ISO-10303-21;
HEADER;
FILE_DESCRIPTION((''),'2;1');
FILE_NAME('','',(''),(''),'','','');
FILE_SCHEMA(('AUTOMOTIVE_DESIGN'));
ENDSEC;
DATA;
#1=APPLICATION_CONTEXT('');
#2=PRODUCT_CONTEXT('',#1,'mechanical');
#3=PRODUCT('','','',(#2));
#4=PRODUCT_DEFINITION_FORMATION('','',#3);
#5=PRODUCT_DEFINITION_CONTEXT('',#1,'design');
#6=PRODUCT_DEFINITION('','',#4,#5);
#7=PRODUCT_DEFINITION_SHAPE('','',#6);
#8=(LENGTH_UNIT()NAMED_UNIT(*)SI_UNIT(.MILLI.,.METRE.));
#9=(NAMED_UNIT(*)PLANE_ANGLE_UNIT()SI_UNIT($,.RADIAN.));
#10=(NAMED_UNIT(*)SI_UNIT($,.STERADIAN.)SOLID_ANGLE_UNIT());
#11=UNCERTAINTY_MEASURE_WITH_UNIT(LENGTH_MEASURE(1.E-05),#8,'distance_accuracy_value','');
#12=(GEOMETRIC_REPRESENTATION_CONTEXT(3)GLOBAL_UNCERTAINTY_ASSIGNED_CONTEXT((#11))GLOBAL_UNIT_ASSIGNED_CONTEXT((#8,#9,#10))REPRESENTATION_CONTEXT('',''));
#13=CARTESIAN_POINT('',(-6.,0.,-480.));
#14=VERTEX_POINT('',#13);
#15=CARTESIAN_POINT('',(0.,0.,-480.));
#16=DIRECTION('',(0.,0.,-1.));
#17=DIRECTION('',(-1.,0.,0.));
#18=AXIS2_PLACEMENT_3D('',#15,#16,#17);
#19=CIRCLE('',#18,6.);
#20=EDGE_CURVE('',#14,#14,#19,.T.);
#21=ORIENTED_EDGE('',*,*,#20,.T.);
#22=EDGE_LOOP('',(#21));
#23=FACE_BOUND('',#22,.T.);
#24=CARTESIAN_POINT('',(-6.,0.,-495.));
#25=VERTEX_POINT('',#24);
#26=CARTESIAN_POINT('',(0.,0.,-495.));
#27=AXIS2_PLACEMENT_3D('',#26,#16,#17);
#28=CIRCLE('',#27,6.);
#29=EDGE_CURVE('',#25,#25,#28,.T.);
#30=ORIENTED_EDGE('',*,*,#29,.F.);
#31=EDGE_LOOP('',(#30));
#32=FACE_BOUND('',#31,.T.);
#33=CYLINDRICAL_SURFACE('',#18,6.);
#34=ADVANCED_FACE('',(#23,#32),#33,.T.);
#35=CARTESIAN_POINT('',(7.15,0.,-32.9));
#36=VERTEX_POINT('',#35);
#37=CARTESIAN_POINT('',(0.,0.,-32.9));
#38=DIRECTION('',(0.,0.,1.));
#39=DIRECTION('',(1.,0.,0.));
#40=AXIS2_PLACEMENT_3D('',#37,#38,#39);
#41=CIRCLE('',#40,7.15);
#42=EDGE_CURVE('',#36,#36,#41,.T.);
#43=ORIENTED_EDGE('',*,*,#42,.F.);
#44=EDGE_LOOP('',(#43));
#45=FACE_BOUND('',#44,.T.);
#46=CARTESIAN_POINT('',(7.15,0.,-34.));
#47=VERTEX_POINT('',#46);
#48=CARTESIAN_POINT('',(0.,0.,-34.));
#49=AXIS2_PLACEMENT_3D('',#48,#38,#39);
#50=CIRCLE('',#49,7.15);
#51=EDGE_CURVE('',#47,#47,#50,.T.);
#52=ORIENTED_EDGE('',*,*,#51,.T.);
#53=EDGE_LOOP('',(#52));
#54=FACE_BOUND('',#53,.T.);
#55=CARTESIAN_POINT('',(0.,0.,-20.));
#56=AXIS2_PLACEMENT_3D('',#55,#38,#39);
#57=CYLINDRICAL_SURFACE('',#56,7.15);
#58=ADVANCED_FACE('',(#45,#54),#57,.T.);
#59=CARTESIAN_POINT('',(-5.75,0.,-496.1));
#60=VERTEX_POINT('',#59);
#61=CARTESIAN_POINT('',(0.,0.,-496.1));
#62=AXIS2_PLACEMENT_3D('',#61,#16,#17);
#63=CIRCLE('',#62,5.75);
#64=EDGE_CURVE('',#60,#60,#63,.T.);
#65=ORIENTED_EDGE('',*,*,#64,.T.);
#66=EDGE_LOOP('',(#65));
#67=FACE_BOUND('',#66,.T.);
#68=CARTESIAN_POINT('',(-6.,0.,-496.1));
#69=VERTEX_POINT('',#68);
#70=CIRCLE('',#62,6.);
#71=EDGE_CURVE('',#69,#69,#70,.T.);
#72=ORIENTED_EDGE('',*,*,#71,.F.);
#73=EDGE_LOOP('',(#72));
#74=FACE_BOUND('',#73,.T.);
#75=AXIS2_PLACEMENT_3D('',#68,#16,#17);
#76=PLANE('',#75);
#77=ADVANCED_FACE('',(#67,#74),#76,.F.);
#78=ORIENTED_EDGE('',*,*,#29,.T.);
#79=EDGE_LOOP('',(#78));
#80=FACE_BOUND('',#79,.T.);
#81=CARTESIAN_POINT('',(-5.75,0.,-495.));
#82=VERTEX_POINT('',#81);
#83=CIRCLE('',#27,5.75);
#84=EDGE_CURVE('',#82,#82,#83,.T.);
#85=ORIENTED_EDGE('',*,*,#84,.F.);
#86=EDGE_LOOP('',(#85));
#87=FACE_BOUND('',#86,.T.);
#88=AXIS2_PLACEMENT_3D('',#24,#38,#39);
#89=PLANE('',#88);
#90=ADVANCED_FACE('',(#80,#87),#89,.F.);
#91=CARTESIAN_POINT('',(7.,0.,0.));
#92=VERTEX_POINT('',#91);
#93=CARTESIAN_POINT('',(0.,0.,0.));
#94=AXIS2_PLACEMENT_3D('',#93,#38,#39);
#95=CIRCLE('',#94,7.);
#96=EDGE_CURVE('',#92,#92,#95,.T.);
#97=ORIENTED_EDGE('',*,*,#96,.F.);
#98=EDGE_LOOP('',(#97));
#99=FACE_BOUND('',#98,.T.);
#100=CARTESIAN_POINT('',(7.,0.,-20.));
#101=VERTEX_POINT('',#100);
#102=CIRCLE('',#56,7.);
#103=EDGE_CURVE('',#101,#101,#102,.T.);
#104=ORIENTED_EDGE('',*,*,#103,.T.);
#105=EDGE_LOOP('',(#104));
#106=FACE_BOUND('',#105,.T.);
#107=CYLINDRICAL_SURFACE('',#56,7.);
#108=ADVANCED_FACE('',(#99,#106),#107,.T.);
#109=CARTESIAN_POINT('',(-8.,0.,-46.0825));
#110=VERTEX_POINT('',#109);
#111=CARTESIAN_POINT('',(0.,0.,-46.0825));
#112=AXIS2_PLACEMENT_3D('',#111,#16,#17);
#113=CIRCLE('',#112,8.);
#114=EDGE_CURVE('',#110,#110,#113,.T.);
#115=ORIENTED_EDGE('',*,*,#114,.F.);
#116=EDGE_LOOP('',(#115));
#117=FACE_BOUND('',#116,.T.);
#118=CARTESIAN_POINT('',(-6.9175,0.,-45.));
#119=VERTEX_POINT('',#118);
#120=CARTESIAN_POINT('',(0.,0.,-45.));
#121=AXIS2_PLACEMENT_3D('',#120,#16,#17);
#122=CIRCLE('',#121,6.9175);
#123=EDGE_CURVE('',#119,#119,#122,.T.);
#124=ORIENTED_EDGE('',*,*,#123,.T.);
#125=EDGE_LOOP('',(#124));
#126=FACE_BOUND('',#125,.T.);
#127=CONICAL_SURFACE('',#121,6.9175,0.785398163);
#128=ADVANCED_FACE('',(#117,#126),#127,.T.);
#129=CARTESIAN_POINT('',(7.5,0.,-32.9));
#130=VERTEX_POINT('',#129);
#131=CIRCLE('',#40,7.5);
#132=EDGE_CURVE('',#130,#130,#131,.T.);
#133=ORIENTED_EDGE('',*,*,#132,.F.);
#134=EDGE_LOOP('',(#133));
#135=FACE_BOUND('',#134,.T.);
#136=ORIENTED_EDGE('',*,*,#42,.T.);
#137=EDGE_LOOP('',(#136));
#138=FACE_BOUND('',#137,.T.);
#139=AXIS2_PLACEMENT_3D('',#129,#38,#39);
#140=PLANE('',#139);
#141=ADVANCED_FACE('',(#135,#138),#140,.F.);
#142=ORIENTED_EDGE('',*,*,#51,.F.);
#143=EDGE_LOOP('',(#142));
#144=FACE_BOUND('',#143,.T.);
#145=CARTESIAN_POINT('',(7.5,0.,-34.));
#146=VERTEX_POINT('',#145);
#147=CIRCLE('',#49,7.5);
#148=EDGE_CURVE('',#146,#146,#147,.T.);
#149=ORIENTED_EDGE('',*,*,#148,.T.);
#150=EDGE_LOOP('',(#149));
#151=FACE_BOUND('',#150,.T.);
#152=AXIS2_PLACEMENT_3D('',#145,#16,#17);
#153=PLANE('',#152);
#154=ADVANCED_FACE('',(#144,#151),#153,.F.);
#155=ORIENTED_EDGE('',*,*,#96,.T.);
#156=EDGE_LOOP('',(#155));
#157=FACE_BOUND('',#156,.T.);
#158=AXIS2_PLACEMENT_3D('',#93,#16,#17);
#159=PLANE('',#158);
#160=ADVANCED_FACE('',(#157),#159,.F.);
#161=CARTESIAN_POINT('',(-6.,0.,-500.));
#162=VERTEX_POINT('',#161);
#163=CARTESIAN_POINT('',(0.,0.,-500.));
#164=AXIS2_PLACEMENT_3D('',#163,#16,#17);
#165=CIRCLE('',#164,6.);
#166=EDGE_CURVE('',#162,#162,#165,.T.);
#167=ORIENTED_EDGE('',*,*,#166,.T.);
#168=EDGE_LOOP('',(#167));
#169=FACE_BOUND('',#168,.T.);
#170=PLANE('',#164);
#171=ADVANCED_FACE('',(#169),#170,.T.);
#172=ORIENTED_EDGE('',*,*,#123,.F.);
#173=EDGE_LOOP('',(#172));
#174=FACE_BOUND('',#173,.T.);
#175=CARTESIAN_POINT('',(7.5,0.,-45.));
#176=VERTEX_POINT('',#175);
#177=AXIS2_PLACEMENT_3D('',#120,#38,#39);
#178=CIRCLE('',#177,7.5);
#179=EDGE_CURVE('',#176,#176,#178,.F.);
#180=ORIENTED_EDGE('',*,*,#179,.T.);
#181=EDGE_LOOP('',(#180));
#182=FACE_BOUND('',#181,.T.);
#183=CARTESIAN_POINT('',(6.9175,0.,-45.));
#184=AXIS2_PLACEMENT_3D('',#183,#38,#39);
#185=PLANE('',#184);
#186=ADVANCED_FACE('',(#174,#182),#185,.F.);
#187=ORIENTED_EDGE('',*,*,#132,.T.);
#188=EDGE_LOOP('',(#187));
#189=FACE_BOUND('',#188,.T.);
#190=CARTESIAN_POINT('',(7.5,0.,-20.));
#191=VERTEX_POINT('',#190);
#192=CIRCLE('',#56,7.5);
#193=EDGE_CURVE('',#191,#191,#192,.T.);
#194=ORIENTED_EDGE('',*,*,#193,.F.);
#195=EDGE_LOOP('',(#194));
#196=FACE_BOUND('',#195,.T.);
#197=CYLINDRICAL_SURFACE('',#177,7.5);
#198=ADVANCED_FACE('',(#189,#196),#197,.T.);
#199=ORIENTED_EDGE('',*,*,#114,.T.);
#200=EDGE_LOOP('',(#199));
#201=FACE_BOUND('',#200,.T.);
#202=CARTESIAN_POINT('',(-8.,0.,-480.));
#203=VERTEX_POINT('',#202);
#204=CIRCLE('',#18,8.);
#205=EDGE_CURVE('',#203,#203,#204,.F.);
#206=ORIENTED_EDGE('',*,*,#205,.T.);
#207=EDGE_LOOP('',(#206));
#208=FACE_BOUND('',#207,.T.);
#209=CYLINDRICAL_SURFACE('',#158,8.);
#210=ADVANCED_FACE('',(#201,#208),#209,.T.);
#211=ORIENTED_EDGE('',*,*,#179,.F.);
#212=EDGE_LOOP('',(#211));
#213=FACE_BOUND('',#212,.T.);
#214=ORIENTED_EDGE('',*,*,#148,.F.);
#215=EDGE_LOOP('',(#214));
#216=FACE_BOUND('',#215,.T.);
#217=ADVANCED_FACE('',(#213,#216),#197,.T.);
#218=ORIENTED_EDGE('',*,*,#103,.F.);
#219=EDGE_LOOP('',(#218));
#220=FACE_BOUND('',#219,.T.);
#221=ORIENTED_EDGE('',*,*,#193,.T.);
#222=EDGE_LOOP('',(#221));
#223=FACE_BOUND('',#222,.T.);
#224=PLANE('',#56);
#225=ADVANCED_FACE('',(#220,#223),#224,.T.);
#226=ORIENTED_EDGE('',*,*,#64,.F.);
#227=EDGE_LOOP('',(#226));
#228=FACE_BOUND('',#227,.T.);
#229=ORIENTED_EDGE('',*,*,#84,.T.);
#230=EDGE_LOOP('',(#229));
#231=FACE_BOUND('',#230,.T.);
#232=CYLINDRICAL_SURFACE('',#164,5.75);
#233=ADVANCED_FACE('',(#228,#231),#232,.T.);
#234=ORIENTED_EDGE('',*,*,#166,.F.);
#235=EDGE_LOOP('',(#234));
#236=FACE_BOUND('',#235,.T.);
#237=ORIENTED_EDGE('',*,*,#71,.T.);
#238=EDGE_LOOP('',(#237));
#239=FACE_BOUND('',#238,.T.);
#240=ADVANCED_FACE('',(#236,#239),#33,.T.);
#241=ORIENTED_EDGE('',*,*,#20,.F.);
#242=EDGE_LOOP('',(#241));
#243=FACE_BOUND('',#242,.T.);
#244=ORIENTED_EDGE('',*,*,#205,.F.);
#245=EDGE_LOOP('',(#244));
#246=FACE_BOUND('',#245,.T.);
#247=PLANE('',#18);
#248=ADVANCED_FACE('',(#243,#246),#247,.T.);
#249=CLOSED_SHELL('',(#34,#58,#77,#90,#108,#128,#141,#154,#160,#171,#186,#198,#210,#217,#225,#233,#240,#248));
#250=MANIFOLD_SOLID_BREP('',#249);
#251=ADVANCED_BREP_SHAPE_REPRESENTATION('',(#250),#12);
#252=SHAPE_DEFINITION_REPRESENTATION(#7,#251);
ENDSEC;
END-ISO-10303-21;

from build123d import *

# Parameters (mm, degrees)
SWEEP_1_PROFILE_R   = 8
SKETCH_11_OUTSIDE_W = 118.102
SKETCH_11_OUTSIDE_H = 118.102
SKETCH_11_OUTSIDE_R = 7
CUT_EXTRUDE_1_DEPTH = 20
SKETCH_16_OUTSIDE_W = 118.102
SKETCH_16_OUTSIDE_H = 118.102
SKETCH_16_OUTSIDE_R = 7.5
CUT_EXTRUDE_3_DEPTH = 25
SKETCH_31_W         = 1.1
SKETCH_31_H         = 0.35
SKETCH_12_OUTSIDE_W = 118.102
SKETCH_12_OUTSIDE_H = 118.102
SKETCH_12_OUTSIDE_R = 6
CUT_EXTRUDE_2_DEPTH = 20
SKETCH_3_W          = 1.1
SKETCH_3_H          = 0.25


# Read off the part's stored shape, not the designer's step: M16 机械螺纹 螺柱1
with BuildPart() as part:
    # 扫描1: sweep along a path in 草图1
    with BuildLine(Plane(origin=(0, 0, 0), x_dir=(0, 0, -1), z_dir=(1, 0, 0))) as sweep_1_path:
        Line((0, 0), (500, 0))
    # 扫描1 profile (on start of the path) → 扫描1 (sweep)
    with BuildSketch(Plane(origin=(0, 0, 0), x_dir=(-1, 0, 0), z_dir=(0, 0, -1))):
        Circle(SWEEP_1_PROFILE_R)
    sweep(path=sweep_1_path.line)

    # 草图11 outside → 切除-拉伸1 (cut)
    with BuildSketch(Plane.XY):
        Rectangle(SKETCH_11_OUTSIDE_W, SKETCH_11_OUTSIDE_H)
        Circle(SKETCH_11_OUTSIDE_R, mode=Mode.SUBTRACT)
    extrude(amount=-CUT_EXTRUDE_1_DEPTH, mode=Mode.SUBTRACT)

    # 草图16 outside → 切除-拉伸3 (cut)
    with BuildSketch(Plane.XY.offset(-20)):
        Rectangle(SKETCH_16_OUTSIDE_W, SKETCH_16_OUTSIDE_H)
        Circle(SKETCH_16_OUTSIDE_R, mode=Mode.SUBTRACT)
    extrude(amount=-CUT_EXTRUDE_3_DEPTH, mode=Mode.SUBTRACT)

    # 草图31 → 切除-旋转11 (revolve, cut)
    with BuildSketch(Plane(origin=(100, 0, -20), x_dir=(0, 0, -1), z_dir=(0, 1, 0))):
        with Locations((13.45, 92.675)):
            Rectangle(SKETCH_31_W, SKETCH_31_H)
    revolve(axis=Axis((0, 0, -20), (0, 0, -1)), mode=Mode.SUBTRACT)

    # 草图12 outside → 切除-拉伸2 (cut)
    with BuildSketch(Plane(origin=(0, 0, -500), x_dir=(-1, 0, 0), z_dir=(0, 0, -1))):
        Rectangle(SKETCH_12_OUTSIDE_W, SKETCH_12_OUTSIDE_H)
        Circle(SKETCH_12_OUTSIDE_R, mode=Mode.SUBTRACT)
    extrude(amount=-CUT_EXTRUDE_2_DEPTH, mode=Mode.SUBTRACT)

    # M16 机械螺纹 螺柱1 outline → M16 机械螺纹 螺柱1 (revolve, cut)
    with BuildSketch(Plane.XZ):
        Polygon((8, -45), (6.9175, -45), (8, -46.0825), align=None)
    revolve(axis=Axis((0, 0, 0), (0, 0, 1)), mode=Mode.SUBTRACT)

    # 草图3 → 切除-旋转1 (revolve, cut)
    with BuildSketch(Plane(origin=(-100, 0, -500), x_dir=(0, 0, 1), z_dir=(0, 1, 0))):
        with Locations((4.45, 94.125)):
            Rectangle(SKETCH_3_W, SKETCH_3_H)
    revolve(axis=Axis((0, 0, -500), (0, 0, 1)), mode=Mode.SUBTRACT)


solid = part.part
